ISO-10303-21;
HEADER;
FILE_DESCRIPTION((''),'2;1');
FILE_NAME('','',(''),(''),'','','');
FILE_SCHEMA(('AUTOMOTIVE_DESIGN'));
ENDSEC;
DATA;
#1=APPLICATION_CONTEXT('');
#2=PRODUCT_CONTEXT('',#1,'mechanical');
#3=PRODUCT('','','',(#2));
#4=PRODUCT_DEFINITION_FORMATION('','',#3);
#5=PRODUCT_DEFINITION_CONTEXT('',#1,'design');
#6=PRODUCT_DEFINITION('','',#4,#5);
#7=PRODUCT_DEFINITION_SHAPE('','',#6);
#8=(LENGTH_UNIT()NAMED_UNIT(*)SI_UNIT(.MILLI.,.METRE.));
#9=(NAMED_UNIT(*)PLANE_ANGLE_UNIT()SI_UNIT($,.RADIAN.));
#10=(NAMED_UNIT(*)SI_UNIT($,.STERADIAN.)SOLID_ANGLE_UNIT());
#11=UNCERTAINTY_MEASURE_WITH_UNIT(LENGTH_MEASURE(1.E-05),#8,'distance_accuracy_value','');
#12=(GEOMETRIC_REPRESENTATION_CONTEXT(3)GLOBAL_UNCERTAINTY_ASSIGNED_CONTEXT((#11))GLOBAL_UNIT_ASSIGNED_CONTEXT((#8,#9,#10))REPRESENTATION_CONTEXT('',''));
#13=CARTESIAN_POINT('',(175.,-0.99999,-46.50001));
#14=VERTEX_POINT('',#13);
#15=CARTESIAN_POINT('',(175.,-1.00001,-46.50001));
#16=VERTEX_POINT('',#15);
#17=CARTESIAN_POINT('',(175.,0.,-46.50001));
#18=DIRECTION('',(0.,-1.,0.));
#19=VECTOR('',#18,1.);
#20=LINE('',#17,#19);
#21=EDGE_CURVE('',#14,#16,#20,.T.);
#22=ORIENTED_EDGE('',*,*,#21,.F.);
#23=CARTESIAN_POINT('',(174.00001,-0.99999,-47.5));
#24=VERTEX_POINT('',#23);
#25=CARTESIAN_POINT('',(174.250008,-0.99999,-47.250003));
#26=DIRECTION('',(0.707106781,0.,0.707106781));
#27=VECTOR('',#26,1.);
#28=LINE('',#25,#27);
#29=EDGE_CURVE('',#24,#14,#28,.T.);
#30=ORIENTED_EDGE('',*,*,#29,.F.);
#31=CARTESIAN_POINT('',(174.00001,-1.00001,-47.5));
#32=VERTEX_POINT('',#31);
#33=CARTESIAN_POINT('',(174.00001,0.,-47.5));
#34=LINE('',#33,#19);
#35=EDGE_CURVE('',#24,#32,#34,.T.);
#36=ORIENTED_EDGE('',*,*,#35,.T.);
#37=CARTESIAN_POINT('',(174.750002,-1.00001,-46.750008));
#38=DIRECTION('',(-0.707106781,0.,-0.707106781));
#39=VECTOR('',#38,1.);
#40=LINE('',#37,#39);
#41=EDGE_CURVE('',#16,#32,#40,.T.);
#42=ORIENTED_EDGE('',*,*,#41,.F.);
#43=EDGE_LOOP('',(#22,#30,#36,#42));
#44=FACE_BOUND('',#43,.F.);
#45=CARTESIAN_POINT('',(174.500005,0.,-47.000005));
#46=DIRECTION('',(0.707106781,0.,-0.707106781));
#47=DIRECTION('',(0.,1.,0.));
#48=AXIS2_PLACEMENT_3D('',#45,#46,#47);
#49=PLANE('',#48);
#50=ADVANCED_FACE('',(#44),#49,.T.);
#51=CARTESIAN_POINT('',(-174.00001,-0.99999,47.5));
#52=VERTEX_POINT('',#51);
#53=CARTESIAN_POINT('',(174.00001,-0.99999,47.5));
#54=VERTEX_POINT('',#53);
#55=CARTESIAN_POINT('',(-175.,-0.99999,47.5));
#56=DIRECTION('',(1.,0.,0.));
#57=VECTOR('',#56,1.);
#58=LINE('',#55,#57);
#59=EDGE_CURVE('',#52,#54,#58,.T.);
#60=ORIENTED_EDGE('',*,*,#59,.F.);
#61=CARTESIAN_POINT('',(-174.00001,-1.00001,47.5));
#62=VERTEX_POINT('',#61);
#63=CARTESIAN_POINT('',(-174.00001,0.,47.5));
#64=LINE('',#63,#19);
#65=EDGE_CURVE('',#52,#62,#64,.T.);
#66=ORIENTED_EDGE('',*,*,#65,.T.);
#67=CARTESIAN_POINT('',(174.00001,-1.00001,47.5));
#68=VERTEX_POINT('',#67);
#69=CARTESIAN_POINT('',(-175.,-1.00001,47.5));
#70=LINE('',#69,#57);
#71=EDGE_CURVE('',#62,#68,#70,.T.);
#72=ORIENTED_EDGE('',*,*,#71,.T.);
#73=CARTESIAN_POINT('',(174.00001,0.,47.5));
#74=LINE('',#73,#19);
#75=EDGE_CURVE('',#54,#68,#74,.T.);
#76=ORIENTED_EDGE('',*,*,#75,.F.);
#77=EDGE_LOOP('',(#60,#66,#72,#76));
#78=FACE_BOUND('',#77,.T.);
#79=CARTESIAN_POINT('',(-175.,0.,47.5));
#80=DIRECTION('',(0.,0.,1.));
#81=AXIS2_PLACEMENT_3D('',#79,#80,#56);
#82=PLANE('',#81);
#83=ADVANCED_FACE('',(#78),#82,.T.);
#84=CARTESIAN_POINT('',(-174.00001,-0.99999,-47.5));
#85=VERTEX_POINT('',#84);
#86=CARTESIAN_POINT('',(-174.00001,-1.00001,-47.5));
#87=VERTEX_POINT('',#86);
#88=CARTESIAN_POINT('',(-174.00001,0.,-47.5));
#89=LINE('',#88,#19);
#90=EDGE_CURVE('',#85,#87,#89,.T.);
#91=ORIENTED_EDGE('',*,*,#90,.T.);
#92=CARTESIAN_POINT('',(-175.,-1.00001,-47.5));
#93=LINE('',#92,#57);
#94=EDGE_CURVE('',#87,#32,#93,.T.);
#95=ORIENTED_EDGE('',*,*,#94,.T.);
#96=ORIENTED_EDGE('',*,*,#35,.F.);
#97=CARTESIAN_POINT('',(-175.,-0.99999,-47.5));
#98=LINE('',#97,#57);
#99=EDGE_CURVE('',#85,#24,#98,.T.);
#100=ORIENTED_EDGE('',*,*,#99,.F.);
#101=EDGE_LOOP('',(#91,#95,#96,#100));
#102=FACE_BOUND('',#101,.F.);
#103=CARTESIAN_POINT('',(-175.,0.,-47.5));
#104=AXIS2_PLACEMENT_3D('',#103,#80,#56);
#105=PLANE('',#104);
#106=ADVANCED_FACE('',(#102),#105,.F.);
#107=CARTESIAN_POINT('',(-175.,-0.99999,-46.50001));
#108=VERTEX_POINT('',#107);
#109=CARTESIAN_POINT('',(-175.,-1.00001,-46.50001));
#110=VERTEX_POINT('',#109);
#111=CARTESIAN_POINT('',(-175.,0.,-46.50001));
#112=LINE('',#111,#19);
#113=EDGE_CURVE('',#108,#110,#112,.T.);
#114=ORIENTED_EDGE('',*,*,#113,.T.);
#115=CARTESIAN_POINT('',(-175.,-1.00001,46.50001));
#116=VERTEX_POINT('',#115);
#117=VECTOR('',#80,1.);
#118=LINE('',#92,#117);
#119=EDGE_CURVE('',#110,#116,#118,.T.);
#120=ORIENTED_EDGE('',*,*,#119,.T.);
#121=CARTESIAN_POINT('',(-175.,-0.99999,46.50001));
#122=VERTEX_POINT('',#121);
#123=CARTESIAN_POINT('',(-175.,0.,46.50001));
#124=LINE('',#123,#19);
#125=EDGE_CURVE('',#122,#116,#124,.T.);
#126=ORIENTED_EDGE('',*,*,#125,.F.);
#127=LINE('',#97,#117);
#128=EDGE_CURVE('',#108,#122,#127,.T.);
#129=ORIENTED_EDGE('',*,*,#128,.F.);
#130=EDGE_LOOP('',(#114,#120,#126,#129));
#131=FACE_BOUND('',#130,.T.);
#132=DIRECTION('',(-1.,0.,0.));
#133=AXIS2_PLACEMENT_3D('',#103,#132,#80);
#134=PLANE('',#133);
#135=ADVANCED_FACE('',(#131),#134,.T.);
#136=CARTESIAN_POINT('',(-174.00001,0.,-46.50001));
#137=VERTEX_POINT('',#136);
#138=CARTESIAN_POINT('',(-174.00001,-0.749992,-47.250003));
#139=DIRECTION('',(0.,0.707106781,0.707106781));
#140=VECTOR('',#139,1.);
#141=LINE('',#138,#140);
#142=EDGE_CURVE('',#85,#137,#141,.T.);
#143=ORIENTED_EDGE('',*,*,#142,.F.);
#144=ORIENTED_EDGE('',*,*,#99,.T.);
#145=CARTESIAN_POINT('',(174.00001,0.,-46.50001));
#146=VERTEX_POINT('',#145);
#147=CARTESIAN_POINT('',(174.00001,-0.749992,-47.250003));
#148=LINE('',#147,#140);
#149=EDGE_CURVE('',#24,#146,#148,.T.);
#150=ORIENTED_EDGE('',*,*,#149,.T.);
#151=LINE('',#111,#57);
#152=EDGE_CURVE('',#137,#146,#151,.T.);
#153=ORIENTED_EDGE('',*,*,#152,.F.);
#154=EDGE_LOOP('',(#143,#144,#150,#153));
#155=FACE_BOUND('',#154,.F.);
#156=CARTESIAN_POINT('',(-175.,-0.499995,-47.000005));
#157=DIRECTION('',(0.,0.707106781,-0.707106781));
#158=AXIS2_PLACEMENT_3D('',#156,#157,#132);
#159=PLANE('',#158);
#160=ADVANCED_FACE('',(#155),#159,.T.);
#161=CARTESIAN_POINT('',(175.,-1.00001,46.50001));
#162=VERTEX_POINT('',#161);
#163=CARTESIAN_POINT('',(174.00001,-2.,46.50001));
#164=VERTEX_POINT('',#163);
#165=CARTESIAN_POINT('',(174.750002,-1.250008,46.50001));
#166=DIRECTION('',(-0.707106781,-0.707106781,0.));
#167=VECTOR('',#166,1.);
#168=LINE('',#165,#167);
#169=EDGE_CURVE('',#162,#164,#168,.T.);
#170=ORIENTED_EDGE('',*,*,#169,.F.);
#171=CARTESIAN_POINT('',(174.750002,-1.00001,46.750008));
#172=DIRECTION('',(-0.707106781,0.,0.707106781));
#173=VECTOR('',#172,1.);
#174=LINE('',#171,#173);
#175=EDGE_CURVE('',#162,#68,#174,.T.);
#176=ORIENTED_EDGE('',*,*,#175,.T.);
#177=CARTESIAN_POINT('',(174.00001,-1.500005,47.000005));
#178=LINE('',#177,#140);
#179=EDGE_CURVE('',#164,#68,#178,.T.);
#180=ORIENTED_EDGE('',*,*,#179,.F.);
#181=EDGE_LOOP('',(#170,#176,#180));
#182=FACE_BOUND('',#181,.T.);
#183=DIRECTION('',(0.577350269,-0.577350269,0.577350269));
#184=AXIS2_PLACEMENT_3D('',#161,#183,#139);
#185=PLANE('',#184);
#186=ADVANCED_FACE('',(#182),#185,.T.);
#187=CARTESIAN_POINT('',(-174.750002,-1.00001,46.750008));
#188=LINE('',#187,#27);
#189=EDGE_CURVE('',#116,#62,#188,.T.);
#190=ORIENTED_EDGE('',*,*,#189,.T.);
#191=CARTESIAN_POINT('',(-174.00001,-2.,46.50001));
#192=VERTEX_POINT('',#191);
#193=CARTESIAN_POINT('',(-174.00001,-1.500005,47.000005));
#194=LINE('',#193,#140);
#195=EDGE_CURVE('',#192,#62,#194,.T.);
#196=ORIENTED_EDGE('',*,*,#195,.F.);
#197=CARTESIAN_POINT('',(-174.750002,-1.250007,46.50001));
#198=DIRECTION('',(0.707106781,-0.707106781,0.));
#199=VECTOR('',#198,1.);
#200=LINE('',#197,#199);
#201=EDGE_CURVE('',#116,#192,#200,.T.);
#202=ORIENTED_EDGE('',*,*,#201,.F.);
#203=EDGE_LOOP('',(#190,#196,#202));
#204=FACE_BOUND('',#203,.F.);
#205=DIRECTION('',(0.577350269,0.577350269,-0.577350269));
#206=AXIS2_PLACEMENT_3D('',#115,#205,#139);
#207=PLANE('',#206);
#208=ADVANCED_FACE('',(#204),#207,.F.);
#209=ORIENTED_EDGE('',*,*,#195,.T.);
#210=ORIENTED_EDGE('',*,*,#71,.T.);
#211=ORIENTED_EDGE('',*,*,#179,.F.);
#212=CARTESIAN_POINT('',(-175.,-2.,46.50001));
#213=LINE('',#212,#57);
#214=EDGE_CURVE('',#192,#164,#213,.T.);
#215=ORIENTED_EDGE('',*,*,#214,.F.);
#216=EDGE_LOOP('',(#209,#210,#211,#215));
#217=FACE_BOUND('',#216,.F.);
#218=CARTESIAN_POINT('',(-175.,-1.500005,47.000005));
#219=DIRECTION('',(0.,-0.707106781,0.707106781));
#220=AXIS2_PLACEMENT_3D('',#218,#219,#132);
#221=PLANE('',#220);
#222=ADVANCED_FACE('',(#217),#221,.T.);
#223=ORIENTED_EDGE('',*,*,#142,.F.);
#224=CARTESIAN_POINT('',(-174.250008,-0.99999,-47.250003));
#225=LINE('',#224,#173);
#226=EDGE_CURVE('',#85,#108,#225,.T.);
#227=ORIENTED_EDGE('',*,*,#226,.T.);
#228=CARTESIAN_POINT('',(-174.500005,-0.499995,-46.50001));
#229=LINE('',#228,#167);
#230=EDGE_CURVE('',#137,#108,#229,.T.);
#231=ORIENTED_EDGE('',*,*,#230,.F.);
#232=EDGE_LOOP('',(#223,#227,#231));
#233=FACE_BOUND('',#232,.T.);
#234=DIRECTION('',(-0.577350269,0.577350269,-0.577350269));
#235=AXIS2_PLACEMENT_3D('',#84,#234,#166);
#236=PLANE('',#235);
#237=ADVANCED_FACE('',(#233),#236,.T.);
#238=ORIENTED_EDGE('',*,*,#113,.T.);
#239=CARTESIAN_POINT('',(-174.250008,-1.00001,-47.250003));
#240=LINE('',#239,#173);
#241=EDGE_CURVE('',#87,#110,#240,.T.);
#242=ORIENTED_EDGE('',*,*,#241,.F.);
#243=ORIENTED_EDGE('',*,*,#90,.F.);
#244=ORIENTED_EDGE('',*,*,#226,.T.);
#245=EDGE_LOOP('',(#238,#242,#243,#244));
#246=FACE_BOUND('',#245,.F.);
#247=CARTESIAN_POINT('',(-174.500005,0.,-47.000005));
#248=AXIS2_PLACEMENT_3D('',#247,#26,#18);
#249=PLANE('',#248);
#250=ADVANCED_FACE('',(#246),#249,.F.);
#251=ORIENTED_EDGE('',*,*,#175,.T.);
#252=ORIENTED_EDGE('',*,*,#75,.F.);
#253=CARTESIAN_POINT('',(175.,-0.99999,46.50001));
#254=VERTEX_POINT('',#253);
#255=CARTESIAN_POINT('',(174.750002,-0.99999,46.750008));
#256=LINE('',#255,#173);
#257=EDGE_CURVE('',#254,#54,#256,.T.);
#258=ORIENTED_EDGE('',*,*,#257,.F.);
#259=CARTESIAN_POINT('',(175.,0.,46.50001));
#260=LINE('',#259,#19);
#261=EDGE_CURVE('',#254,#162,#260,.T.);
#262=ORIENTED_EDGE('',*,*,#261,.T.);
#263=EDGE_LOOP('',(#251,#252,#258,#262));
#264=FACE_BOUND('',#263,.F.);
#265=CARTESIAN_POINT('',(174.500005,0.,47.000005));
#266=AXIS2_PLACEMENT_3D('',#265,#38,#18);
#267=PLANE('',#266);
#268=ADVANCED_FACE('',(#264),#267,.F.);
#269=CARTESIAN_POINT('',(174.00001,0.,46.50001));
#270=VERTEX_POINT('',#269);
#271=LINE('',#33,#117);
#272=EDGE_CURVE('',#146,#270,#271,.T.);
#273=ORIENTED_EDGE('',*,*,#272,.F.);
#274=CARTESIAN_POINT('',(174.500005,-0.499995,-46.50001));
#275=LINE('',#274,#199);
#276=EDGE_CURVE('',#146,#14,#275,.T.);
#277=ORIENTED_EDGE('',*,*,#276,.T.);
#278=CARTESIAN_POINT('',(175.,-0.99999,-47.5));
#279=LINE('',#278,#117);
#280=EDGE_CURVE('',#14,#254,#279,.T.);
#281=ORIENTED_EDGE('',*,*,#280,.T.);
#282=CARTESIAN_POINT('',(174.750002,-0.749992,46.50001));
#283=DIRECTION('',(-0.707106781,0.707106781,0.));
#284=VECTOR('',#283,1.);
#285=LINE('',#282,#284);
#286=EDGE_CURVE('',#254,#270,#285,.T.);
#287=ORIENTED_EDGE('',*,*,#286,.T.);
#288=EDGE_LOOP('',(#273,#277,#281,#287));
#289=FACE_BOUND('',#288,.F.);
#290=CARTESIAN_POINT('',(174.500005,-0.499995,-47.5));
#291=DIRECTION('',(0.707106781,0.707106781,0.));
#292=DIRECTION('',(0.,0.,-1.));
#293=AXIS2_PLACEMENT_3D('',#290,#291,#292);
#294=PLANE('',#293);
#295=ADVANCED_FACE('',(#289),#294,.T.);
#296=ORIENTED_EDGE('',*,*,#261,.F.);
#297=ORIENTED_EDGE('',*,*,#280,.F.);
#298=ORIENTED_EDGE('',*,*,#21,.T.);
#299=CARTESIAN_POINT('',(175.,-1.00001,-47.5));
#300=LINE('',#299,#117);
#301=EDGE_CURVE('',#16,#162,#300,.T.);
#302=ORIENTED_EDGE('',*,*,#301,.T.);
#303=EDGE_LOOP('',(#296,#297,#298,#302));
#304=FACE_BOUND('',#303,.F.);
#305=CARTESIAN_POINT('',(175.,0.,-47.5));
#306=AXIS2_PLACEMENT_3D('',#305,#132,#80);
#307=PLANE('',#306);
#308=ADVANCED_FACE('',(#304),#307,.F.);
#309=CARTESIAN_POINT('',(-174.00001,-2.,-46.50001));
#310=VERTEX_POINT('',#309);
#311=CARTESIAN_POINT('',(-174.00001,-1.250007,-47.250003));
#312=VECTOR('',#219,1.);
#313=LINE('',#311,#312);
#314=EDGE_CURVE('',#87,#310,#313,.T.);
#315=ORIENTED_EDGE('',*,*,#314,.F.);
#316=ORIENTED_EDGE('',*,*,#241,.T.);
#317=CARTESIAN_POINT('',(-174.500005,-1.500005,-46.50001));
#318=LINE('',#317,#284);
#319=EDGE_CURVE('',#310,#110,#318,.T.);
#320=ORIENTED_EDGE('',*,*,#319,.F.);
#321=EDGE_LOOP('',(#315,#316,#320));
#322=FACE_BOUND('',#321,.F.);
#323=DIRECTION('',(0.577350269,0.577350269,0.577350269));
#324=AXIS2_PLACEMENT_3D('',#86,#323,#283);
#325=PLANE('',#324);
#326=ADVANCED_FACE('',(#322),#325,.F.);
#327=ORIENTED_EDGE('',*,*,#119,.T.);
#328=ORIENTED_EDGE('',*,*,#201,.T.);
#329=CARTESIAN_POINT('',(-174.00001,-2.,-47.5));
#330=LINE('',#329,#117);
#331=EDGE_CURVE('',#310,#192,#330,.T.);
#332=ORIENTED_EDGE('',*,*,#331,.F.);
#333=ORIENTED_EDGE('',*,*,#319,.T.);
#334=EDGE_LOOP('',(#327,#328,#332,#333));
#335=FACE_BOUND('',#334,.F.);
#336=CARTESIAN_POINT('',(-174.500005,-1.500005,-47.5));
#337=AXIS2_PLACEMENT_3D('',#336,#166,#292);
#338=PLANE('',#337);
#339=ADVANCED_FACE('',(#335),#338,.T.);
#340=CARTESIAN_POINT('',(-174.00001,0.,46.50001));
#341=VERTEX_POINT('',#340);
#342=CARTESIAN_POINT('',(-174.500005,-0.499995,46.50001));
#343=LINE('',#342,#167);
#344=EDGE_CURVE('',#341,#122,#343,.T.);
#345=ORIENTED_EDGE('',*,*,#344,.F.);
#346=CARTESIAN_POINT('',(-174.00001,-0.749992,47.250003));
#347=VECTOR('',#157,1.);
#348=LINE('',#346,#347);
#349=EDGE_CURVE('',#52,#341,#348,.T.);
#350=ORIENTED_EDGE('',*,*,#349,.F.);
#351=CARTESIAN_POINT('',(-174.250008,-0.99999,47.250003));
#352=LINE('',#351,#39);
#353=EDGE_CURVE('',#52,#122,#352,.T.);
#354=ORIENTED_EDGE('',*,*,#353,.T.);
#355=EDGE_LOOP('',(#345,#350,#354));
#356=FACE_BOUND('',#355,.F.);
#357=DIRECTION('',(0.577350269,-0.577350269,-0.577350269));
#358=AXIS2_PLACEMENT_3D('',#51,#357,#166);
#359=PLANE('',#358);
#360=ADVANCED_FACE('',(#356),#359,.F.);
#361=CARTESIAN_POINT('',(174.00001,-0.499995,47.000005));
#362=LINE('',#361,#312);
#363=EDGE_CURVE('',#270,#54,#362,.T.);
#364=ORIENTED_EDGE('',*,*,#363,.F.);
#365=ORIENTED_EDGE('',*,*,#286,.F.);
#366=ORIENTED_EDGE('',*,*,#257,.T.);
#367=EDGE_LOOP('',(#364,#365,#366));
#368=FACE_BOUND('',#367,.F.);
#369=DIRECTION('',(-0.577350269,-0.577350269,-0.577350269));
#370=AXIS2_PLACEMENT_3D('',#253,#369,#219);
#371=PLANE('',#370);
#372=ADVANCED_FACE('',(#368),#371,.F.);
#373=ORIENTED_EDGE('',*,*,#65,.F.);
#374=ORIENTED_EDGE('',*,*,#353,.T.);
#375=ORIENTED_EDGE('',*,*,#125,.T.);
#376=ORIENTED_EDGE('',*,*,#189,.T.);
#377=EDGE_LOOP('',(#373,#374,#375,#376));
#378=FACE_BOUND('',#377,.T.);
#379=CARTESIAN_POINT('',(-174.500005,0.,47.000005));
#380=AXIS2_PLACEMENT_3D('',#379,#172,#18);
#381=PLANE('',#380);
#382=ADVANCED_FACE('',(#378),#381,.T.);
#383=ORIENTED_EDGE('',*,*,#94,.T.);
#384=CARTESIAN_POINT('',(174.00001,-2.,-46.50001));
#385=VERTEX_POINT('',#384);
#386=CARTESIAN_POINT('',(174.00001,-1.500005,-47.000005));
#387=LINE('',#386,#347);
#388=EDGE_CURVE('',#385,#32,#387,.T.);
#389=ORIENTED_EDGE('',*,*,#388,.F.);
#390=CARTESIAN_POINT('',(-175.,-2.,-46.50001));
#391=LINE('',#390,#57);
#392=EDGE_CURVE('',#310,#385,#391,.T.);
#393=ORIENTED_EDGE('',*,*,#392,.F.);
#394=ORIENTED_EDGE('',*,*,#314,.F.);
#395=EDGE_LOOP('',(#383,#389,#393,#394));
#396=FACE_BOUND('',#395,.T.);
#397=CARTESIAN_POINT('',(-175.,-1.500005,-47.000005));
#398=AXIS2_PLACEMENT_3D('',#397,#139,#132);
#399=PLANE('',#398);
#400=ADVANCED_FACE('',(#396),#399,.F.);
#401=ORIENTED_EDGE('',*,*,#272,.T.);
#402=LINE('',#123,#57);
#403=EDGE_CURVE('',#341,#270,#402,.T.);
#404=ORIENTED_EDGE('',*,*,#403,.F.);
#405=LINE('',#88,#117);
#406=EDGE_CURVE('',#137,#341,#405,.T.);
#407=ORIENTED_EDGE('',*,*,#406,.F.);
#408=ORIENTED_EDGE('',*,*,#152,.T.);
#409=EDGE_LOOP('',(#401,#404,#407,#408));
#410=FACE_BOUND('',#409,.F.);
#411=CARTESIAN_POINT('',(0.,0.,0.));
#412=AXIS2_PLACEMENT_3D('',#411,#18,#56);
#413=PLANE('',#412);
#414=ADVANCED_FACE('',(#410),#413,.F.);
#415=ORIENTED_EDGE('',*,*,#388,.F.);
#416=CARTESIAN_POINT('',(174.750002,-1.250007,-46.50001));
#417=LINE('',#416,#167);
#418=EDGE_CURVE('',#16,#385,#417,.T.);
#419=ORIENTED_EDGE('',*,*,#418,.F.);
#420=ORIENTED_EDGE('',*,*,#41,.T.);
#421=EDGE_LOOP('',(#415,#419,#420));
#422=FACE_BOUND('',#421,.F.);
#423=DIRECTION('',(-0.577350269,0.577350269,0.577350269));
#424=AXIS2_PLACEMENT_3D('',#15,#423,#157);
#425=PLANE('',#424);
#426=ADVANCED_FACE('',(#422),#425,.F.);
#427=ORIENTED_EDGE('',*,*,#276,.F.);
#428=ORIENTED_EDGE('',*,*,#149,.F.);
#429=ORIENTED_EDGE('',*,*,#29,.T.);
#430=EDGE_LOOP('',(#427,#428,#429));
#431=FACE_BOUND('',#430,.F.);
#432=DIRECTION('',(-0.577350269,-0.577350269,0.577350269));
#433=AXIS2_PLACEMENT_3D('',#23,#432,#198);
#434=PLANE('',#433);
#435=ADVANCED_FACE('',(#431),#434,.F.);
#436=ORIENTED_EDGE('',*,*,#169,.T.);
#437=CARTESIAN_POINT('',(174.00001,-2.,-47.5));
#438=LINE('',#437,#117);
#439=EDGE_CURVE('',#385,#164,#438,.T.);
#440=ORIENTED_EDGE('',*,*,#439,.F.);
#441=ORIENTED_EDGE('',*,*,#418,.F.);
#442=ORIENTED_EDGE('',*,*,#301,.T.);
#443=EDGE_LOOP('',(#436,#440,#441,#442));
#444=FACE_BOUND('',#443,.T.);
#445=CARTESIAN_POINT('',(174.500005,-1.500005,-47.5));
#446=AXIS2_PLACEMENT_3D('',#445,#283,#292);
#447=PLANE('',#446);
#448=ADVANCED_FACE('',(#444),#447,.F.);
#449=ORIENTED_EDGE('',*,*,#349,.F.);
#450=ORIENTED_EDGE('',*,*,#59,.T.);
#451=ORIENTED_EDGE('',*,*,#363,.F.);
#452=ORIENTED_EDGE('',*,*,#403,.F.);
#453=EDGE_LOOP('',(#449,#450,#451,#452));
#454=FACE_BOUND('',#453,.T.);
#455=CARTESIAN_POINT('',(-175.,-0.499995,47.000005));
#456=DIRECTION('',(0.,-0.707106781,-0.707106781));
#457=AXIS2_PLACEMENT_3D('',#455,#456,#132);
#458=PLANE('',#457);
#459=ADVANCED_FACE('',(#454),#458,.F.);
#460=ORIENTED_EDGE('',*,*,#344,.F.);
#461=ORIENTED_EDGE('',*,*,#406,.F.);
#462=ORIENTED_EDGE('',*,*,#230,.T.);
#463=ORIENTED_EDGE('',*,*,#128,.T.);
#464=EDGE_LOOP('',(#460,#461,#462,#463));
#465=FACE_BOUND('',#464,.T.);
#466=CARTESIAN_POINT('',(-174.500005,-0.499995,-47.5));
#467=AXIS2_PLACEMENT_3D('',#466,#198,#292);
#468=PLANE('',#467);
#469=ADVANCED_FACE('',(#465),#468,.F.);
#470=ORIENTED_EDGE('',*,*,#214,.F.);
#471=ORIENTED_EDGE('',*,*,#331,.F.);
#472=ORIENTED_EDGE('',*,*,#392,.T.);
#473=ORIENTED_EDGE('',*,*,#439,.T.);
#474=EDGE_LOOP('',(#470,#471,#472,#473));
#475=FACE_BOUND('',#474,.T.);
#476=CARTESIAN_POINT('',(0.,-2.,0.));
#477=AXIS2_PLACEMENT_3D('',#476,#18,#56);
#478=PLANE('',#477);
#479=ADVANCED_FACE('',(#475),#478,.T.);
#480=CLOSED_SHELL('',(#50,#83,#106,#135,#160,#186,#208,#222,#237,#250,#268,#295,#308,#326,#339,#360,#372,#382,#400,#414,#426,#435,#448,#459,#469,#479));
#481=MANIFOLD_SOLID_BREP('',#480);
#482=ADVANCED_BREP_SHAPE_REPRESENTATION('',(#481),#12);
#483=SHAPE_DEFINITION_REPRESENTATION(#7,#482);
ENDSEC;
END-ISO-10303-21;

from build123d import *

# Parameters (mm, degrees)
F0_W     = 350
F0_H     = 95
F1_DEPTH = 2
F2_SIZE  = 0.99999


# Not quite as in the source:
# - a fillet or chamfer is up to 0.001 mm smaller than in the source, because OpenCascade refuses the exact size


with BuildPart() as f1:
    # F0 (on Front) → F1 (new body)
    with BuildSketch(Plane.XZ):
        Rectangle(F0_W, F0_H)
    extrude(amount=F1_DEPTH)

    # F2 (size 1 in the source; OpenCascade refuses exactly that, so slightly less here)
    f2_edges = [f1.edges().sort_by_distance(p)[0] for p in [
        (-175, 0, 0),
        (0, 0, 47.5),
        (0, -2, 47.5),
        (-175, -2, 0),
        (175, 0, 0),
        (0, 0, -47.5),
        (0, -2, -47.5),
        (175, -2, 0),
        (175, -1, -47.5),
        (175, -1, 47.5),
        (-175, -1, 47.5),
        (-175, -1, -47.5),
    ]]
    chamfer(f2_edges, length=F2_SIZE)


solid = f1.part
